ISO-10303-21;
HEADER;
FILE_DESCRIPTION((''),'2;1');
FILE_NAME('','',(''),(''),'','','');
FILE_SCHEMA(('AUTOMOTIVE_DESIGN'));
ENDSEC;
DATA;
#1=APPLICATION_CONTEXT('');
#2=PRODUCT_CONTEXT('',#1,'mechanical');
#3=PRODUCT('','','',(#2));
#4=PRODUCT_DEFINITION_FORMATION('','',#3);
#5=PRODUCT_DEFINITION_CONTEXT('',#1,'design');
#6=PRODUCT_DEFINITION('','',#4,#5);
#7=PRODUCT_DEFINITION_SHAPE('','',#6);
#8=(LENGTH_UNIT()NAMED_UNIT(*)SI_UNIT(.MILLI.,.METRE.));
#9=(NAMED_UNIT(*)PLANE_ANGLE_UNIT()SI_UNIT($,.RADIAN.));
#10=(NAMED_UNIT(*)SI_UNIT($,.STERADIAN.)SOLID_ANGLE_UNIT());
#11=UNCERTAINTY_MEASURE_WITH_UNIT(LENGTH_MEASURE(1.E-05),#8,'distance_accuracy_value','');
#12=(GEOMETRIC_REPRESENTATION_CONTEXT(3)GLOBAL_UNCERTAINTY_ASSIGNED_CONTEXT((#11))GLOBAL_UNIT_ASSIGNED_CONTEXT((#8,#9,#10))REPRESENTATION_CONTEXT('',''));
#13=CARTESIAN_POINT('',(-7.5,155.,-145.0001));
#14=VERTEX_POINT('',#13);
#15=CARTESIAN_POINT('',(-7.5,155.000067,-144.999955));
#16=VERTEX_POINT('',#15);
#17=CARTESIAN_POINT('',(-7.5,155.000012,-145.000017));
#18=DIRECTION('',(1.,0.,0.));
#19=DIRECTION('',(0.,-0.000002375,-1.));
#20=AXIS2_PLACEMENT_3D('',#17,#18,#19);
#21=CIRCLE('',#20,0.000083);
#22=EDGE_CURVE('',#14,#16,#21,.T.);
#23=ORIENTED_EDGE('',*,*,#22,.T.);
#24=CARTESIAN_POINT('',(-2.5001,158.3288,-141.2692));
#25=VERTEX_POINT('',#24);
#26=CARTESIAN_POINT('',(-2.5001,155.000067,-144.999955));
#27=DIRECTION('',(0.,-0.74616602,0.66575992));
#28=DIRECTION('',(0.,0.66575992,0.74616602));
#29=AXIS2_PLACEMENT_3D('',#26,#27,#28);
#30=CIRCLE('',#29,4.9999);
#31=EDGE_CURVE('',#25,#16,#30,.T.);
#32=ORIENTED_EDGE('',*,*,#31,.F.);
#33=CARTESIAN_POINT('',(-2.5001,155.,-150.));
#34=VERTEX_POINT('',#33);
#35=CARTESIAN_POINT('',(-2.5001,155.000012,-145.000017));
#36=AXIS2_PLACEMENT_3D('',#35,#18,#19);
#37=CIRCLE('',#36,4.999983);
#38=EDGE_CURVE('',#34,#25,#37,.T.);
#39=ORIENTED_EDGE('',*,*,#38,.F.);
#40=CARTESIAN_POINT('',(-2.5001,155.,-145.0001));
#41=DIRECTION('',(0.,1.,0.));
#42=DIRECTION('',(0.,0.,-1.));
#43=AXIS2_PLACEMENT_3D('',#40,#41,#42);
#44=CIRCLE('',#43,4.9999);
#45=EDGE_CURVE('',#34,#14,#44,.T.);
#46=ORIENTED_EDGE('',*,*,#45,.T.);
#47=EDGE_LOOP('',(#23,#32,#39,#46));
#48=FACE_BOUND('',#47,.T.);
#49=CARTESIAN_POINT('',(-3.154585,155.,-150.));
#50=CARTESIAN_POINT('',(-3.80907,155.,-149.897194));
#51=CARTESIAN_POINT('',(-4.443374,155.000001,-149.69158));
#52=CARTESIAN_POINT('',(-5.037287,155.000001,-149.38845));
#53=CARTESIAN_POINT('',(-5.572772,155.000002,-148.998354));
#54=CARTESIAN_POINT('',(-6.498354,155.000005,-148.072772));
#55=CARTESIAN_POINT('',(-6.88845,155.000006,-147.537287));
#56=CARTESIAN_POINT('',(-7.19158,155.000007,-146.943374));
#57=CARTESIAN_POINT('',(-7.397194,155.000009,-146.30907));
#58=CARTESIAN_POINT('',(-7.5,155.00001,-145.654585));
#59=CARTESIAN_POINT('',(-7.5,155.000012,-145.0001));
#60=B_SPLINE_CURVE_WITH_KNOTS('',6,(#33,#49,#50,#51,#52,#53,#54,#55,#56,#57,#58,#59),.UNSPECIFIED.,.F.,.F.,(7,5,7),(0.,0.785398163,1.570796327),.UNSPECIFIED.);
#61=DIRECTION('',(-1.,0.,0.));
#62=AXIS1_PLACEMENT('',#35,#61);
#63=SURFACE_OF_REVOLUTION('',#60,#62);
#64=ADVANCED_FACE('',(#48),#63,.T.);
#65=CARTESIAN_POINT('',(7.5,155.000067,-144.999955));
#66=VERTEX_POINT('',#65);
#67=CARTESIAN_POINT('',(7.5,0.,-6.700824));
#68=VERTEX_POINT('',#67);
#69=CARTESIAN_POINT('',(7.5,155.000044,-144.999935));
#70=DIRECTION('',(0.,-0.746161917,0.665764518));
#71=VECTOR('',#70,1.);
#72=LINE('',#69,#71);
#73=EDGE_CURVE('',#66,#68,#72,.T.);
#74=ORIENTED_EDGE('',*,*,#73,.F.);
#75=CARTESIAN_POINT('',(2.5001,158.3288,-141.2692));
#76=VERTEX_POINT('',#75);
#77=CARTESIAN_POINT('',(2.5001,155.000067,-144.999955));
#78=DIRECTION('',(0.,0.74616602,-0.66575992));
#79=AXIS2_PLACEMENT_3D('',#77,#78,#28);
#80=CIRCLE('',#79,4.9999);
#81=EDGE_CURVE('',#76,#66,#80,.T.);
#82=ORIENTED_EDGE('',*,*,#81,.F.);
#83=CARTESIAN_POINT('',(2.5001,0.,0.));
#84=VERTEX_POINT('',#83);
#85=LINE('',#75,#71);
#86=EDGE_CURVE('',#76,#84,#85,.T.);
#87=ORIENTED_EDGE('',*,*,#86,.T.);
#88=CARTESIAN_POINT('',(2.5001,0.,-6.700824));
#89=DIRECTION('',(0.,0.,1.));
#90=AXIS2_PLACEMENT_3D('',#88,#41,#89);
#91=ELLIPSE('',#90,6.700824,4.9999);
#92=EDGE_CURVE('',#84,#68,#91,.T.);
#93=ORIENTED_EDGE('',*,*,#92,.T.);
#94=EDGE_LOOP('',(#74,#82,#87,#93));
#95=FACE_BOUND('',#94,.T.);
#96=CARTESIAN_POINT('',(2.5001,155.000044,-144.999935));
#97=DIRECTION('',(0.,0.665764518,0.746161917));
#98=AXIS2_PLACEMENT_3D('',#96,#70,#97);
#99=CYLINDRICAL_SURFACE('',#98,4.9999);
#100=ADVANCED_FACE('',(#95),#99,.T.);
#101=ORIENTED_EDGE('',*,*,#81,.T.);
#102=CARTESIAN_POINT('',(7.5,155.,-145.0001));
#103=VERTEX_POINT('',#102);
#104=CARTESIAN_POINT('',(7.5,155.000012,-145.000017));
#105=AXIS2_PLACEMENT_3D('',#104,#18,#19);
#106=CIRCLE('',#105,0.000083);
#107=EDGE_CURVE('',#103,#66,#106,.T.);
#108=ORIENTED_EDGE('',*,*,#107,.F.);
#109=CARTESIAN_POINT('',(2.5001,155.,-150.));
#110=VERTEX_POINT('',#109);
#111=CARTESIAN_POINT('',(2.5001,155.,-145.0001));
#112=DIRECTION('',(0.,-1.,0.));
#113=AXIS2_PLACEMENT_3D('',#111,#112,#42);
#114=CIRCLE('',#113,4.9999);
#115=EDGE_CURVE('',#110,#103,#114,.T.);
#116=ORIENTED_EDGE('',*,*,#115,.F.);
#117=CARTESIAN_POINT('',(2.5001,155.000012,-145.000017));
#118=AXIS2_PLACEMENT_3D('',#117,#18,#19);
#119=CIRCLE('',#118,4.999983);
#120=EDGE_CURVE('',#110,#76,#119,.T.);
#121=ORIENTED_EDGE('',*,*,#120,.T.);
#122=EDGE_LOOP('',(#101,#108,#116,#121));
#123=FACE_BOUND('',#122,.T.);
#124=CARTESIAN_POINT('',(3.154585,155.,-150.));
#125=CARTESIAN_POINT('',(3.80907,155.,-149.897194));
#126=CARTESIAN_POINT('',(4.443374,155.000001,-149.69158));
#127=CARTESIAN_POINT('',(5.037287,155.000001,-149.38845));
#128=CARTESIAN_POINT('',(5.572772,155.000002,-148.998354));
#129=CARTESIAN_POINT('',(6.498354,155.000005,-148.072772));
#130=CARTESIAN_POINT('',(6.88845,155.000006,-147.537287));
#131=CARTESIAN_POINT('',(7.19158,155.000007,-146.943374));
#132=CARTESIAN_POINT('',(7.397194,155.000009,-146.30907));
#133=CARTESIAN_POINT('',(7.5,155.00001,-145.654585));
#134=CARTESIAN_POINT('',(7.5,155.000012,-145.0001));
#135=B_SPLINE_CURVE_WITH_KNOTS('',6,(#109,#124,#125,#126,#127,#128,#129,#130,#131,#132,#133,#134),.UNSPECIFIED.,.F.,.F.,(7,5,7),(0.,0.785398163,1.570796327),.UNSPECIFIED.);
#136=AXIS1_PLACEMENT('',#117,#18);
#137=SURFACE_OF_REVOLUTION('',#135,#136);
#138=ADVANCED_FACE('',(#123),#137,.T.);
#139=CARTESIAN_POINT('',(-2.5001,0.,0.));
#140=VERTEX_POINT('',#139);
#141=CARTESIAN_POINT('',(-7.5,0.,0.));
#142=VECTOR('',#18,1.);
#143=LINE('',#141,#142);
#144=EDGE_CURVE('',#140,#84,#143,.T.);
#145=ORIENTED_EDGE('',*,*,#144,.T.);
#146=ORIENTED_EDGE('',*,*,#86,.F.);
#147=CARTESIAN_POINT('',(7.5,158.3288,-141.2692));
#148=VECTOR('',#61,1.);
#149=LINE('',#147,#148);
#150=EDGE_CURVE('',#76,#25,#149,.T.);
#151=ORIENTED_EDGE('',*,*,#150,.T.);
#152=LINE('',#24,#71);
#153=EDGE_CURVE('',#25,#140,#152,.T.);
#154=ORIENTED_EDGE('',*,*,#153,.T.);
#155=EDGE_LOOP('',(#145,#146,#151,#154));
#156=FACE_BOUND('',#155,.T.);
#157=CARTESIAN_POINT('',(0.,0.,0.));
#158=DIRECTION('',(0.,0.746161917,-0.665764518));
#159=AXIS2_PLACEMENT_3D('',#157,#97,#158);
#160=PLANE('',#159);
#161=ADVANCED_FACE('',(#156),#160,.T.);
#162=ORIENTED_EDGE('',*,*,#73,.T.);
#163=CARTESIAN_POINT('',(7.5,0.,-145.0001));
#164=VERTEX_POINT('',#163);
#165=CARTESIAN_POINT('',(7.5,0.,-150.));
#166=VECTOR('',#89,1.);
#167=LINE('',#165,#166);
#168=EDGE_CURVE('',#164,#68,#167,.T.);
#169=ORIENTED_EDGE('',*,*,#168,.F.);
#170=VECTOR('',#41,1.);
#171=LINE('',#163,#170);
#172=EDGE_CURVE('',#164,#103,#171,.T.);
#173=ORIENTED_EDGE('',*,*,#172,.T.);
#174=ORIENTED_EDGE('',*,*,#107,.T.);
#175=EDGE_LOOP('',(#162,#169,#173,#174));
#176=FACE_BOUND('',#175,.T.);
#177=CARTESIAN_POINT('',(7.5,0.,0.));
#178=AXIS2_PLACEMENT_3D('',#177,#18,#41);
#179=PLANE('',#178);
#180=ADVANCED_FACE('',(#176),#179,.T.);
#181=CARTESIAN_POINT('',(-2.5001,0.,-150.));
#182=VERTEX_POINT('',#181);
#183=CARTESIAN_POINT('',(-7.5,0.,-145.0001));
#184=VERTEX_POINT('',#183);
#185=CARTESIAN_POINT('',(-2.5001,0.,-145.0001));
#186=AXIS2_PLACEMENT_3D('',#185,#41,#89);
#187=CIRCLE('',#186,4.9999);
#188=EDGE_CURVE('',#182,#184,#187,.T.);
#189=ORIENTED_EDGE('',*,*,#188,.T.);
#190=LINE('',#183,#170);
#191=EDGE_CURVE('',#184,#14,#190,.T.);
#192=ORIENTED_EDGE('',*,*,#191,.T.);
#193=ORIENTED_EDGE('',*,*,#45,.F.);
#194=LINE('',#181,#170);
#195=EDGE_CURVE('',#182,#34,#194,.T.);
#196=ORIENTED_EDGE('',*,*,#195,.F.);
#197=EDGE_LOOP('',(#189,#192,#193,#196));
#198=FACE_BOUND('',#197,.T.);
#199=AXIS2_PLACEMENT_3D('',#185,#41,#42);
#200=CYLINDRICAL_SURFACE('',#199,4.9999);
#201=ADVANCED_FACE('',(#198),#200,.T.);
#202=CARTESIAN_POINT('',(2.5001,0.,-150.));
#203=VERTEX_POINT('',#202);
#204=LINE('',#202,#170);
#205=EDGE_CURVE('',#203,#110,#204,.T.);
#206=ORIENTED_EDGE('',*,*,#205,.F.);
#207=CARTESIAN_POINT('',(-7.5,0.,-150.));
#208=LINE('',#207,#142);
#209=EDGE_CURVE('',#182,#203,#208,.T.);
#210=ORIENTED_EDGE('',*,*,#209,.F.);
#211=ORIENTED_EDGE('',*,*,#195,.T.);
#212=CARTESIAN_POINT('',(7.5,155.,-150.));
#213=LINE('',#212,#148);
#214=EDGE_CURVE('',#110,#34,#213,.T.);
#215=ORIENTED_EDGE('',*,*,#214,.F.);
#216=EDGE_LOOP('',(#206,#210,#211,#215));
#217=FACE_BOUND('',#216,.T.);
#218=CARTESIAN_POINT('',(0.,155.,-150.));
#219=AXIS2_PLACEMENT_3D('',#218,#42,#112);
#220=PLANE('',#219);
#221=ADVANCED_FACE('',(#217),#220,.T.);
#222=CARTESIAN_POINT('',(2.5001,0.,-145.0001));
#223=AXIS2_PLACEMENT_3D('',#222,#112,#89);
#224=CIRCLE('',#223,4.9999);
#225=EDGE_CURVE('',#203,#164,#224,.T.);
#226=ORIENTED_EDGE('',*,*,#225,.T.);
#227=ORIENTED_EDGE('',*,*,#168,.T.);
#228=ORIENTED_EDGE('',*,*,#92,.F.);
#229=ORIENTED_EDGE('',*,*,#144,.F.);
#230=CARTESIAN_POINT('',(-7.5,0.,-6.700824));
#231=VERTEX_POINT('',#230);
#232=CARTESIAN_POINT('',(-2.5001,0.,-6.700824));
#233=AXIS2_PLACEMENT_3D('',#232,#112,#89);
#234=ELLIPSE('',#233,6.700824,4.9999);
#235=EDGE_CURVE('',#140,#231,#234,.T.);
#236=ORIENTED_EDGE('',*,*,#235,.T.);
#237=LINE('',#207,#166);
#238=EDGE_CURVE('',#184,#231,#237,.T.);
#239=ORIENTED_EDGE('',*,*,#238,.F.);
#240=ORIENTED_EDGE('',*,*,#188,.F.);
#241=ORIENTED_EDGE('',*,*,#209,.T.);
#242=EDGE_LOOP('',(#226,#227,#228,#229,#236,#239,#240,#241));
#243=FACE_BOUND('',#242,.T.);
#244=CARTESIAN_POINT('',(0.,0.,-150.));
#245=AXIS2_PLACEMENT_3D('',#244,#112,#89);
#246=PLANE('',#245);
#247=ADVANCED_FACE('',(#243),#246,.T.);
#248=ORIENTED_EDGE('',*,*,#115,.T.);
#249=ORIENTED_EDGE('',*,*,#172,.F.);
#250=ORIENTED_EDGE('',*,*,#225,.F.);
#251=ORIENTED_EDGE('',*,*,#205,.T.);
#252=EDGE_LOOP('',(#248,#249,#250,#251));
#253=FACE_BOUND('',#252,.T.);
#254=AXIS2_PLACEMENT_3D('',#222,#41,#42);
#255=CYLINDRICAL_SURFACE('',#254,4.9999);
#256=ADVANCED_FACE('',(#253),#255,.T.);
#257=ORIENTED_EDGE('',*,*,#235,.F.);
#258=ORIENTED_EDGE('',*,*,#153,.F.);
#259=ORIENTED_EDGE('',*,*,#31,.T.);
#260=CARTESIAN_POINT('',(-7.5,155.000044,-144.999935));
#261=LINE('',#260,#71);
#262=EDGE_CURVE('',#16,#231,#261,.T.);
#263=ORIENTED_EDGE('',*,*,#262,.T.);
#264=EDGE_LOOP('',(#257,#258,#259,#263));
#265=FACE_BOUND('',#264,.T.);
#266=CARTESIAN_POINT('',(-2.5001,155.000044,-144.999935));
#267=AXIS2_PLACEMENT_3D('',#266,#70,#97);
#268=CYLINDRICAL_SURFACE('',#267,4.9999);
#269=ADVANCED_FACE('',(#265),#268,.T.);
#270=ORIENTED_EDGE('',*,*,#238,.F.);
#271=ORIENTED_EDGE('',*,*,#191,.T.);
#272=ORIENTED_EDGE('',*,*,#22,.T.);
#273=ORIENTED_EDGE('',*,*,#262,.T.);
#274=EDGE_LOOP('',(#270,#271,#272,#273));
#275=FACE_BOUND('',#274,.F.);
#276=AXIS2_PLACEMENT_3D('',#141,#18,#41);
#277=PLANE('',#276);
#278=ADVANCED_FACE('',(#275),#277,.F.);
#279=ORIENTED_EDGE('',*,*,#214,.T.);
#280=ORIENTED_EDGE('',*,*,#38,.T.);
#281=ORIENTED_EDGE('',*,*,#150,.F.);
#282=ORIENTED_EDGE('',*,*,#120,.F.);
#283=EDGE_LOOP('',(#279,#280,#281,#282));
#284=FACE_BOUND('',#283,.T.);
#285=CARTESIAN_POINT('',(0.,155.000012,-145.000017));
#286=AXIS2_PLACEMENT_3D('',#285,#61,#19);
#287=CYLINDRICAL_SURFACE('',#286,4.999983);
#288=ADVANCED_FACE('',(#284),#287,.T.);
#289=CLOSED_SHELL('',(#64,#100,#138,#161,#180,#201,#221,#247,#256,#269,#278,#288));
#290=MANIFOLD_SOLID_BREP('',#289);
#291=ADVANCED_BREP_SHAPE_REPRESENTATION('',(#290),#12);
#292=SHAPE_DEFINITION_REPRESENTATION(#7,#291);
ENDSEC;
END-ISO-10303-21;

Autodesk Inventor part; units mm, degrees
ref_plane "YZ Plane" through (0, 0, 0) normal (1, 0, 0) x (0, 1, 0)
ref_plane "XZ Plane" through (0, 0, 0) normal (0, 1, 0) x (-1, 0, 0)
ref_plane "XY Plane" through (0, 0, 0) normal (0, 0, 1) x (1, 0, 0)
sketch "Sketch1" plane through (0, 0, 0) normal (1, 0, 0) x (0, 1, 0)
  line L0 (0, 0) -> (158.3288, -141.2692)
  line L1 (155, -150) -> (0, -150)
  line L2 (0, -150) -> (0, 0)
  arc A0 (155, -150) -> (158.3288, -141.2692) centre (155, -145) ccw
  point P0 (168.114, -150)
  dimension "d1" = 150
  dimension "d2" = 5
  dimension "d3" = 155
extrude "Extrusion1" add sketch "Sketch1" along normal mid plane 15
fillet "Fillet1" radius 5 6 edges at (7.5, 159.6719, -146.7813) (7.5, 77.5, -150) (7.5, 79.1644, -70.6346) (-7.5, 159.6719, -146.7813) (-7.5, 77.5, -150) (-7.5, 79.1644, -70.6346)
properties part number "Wing_vertical"
